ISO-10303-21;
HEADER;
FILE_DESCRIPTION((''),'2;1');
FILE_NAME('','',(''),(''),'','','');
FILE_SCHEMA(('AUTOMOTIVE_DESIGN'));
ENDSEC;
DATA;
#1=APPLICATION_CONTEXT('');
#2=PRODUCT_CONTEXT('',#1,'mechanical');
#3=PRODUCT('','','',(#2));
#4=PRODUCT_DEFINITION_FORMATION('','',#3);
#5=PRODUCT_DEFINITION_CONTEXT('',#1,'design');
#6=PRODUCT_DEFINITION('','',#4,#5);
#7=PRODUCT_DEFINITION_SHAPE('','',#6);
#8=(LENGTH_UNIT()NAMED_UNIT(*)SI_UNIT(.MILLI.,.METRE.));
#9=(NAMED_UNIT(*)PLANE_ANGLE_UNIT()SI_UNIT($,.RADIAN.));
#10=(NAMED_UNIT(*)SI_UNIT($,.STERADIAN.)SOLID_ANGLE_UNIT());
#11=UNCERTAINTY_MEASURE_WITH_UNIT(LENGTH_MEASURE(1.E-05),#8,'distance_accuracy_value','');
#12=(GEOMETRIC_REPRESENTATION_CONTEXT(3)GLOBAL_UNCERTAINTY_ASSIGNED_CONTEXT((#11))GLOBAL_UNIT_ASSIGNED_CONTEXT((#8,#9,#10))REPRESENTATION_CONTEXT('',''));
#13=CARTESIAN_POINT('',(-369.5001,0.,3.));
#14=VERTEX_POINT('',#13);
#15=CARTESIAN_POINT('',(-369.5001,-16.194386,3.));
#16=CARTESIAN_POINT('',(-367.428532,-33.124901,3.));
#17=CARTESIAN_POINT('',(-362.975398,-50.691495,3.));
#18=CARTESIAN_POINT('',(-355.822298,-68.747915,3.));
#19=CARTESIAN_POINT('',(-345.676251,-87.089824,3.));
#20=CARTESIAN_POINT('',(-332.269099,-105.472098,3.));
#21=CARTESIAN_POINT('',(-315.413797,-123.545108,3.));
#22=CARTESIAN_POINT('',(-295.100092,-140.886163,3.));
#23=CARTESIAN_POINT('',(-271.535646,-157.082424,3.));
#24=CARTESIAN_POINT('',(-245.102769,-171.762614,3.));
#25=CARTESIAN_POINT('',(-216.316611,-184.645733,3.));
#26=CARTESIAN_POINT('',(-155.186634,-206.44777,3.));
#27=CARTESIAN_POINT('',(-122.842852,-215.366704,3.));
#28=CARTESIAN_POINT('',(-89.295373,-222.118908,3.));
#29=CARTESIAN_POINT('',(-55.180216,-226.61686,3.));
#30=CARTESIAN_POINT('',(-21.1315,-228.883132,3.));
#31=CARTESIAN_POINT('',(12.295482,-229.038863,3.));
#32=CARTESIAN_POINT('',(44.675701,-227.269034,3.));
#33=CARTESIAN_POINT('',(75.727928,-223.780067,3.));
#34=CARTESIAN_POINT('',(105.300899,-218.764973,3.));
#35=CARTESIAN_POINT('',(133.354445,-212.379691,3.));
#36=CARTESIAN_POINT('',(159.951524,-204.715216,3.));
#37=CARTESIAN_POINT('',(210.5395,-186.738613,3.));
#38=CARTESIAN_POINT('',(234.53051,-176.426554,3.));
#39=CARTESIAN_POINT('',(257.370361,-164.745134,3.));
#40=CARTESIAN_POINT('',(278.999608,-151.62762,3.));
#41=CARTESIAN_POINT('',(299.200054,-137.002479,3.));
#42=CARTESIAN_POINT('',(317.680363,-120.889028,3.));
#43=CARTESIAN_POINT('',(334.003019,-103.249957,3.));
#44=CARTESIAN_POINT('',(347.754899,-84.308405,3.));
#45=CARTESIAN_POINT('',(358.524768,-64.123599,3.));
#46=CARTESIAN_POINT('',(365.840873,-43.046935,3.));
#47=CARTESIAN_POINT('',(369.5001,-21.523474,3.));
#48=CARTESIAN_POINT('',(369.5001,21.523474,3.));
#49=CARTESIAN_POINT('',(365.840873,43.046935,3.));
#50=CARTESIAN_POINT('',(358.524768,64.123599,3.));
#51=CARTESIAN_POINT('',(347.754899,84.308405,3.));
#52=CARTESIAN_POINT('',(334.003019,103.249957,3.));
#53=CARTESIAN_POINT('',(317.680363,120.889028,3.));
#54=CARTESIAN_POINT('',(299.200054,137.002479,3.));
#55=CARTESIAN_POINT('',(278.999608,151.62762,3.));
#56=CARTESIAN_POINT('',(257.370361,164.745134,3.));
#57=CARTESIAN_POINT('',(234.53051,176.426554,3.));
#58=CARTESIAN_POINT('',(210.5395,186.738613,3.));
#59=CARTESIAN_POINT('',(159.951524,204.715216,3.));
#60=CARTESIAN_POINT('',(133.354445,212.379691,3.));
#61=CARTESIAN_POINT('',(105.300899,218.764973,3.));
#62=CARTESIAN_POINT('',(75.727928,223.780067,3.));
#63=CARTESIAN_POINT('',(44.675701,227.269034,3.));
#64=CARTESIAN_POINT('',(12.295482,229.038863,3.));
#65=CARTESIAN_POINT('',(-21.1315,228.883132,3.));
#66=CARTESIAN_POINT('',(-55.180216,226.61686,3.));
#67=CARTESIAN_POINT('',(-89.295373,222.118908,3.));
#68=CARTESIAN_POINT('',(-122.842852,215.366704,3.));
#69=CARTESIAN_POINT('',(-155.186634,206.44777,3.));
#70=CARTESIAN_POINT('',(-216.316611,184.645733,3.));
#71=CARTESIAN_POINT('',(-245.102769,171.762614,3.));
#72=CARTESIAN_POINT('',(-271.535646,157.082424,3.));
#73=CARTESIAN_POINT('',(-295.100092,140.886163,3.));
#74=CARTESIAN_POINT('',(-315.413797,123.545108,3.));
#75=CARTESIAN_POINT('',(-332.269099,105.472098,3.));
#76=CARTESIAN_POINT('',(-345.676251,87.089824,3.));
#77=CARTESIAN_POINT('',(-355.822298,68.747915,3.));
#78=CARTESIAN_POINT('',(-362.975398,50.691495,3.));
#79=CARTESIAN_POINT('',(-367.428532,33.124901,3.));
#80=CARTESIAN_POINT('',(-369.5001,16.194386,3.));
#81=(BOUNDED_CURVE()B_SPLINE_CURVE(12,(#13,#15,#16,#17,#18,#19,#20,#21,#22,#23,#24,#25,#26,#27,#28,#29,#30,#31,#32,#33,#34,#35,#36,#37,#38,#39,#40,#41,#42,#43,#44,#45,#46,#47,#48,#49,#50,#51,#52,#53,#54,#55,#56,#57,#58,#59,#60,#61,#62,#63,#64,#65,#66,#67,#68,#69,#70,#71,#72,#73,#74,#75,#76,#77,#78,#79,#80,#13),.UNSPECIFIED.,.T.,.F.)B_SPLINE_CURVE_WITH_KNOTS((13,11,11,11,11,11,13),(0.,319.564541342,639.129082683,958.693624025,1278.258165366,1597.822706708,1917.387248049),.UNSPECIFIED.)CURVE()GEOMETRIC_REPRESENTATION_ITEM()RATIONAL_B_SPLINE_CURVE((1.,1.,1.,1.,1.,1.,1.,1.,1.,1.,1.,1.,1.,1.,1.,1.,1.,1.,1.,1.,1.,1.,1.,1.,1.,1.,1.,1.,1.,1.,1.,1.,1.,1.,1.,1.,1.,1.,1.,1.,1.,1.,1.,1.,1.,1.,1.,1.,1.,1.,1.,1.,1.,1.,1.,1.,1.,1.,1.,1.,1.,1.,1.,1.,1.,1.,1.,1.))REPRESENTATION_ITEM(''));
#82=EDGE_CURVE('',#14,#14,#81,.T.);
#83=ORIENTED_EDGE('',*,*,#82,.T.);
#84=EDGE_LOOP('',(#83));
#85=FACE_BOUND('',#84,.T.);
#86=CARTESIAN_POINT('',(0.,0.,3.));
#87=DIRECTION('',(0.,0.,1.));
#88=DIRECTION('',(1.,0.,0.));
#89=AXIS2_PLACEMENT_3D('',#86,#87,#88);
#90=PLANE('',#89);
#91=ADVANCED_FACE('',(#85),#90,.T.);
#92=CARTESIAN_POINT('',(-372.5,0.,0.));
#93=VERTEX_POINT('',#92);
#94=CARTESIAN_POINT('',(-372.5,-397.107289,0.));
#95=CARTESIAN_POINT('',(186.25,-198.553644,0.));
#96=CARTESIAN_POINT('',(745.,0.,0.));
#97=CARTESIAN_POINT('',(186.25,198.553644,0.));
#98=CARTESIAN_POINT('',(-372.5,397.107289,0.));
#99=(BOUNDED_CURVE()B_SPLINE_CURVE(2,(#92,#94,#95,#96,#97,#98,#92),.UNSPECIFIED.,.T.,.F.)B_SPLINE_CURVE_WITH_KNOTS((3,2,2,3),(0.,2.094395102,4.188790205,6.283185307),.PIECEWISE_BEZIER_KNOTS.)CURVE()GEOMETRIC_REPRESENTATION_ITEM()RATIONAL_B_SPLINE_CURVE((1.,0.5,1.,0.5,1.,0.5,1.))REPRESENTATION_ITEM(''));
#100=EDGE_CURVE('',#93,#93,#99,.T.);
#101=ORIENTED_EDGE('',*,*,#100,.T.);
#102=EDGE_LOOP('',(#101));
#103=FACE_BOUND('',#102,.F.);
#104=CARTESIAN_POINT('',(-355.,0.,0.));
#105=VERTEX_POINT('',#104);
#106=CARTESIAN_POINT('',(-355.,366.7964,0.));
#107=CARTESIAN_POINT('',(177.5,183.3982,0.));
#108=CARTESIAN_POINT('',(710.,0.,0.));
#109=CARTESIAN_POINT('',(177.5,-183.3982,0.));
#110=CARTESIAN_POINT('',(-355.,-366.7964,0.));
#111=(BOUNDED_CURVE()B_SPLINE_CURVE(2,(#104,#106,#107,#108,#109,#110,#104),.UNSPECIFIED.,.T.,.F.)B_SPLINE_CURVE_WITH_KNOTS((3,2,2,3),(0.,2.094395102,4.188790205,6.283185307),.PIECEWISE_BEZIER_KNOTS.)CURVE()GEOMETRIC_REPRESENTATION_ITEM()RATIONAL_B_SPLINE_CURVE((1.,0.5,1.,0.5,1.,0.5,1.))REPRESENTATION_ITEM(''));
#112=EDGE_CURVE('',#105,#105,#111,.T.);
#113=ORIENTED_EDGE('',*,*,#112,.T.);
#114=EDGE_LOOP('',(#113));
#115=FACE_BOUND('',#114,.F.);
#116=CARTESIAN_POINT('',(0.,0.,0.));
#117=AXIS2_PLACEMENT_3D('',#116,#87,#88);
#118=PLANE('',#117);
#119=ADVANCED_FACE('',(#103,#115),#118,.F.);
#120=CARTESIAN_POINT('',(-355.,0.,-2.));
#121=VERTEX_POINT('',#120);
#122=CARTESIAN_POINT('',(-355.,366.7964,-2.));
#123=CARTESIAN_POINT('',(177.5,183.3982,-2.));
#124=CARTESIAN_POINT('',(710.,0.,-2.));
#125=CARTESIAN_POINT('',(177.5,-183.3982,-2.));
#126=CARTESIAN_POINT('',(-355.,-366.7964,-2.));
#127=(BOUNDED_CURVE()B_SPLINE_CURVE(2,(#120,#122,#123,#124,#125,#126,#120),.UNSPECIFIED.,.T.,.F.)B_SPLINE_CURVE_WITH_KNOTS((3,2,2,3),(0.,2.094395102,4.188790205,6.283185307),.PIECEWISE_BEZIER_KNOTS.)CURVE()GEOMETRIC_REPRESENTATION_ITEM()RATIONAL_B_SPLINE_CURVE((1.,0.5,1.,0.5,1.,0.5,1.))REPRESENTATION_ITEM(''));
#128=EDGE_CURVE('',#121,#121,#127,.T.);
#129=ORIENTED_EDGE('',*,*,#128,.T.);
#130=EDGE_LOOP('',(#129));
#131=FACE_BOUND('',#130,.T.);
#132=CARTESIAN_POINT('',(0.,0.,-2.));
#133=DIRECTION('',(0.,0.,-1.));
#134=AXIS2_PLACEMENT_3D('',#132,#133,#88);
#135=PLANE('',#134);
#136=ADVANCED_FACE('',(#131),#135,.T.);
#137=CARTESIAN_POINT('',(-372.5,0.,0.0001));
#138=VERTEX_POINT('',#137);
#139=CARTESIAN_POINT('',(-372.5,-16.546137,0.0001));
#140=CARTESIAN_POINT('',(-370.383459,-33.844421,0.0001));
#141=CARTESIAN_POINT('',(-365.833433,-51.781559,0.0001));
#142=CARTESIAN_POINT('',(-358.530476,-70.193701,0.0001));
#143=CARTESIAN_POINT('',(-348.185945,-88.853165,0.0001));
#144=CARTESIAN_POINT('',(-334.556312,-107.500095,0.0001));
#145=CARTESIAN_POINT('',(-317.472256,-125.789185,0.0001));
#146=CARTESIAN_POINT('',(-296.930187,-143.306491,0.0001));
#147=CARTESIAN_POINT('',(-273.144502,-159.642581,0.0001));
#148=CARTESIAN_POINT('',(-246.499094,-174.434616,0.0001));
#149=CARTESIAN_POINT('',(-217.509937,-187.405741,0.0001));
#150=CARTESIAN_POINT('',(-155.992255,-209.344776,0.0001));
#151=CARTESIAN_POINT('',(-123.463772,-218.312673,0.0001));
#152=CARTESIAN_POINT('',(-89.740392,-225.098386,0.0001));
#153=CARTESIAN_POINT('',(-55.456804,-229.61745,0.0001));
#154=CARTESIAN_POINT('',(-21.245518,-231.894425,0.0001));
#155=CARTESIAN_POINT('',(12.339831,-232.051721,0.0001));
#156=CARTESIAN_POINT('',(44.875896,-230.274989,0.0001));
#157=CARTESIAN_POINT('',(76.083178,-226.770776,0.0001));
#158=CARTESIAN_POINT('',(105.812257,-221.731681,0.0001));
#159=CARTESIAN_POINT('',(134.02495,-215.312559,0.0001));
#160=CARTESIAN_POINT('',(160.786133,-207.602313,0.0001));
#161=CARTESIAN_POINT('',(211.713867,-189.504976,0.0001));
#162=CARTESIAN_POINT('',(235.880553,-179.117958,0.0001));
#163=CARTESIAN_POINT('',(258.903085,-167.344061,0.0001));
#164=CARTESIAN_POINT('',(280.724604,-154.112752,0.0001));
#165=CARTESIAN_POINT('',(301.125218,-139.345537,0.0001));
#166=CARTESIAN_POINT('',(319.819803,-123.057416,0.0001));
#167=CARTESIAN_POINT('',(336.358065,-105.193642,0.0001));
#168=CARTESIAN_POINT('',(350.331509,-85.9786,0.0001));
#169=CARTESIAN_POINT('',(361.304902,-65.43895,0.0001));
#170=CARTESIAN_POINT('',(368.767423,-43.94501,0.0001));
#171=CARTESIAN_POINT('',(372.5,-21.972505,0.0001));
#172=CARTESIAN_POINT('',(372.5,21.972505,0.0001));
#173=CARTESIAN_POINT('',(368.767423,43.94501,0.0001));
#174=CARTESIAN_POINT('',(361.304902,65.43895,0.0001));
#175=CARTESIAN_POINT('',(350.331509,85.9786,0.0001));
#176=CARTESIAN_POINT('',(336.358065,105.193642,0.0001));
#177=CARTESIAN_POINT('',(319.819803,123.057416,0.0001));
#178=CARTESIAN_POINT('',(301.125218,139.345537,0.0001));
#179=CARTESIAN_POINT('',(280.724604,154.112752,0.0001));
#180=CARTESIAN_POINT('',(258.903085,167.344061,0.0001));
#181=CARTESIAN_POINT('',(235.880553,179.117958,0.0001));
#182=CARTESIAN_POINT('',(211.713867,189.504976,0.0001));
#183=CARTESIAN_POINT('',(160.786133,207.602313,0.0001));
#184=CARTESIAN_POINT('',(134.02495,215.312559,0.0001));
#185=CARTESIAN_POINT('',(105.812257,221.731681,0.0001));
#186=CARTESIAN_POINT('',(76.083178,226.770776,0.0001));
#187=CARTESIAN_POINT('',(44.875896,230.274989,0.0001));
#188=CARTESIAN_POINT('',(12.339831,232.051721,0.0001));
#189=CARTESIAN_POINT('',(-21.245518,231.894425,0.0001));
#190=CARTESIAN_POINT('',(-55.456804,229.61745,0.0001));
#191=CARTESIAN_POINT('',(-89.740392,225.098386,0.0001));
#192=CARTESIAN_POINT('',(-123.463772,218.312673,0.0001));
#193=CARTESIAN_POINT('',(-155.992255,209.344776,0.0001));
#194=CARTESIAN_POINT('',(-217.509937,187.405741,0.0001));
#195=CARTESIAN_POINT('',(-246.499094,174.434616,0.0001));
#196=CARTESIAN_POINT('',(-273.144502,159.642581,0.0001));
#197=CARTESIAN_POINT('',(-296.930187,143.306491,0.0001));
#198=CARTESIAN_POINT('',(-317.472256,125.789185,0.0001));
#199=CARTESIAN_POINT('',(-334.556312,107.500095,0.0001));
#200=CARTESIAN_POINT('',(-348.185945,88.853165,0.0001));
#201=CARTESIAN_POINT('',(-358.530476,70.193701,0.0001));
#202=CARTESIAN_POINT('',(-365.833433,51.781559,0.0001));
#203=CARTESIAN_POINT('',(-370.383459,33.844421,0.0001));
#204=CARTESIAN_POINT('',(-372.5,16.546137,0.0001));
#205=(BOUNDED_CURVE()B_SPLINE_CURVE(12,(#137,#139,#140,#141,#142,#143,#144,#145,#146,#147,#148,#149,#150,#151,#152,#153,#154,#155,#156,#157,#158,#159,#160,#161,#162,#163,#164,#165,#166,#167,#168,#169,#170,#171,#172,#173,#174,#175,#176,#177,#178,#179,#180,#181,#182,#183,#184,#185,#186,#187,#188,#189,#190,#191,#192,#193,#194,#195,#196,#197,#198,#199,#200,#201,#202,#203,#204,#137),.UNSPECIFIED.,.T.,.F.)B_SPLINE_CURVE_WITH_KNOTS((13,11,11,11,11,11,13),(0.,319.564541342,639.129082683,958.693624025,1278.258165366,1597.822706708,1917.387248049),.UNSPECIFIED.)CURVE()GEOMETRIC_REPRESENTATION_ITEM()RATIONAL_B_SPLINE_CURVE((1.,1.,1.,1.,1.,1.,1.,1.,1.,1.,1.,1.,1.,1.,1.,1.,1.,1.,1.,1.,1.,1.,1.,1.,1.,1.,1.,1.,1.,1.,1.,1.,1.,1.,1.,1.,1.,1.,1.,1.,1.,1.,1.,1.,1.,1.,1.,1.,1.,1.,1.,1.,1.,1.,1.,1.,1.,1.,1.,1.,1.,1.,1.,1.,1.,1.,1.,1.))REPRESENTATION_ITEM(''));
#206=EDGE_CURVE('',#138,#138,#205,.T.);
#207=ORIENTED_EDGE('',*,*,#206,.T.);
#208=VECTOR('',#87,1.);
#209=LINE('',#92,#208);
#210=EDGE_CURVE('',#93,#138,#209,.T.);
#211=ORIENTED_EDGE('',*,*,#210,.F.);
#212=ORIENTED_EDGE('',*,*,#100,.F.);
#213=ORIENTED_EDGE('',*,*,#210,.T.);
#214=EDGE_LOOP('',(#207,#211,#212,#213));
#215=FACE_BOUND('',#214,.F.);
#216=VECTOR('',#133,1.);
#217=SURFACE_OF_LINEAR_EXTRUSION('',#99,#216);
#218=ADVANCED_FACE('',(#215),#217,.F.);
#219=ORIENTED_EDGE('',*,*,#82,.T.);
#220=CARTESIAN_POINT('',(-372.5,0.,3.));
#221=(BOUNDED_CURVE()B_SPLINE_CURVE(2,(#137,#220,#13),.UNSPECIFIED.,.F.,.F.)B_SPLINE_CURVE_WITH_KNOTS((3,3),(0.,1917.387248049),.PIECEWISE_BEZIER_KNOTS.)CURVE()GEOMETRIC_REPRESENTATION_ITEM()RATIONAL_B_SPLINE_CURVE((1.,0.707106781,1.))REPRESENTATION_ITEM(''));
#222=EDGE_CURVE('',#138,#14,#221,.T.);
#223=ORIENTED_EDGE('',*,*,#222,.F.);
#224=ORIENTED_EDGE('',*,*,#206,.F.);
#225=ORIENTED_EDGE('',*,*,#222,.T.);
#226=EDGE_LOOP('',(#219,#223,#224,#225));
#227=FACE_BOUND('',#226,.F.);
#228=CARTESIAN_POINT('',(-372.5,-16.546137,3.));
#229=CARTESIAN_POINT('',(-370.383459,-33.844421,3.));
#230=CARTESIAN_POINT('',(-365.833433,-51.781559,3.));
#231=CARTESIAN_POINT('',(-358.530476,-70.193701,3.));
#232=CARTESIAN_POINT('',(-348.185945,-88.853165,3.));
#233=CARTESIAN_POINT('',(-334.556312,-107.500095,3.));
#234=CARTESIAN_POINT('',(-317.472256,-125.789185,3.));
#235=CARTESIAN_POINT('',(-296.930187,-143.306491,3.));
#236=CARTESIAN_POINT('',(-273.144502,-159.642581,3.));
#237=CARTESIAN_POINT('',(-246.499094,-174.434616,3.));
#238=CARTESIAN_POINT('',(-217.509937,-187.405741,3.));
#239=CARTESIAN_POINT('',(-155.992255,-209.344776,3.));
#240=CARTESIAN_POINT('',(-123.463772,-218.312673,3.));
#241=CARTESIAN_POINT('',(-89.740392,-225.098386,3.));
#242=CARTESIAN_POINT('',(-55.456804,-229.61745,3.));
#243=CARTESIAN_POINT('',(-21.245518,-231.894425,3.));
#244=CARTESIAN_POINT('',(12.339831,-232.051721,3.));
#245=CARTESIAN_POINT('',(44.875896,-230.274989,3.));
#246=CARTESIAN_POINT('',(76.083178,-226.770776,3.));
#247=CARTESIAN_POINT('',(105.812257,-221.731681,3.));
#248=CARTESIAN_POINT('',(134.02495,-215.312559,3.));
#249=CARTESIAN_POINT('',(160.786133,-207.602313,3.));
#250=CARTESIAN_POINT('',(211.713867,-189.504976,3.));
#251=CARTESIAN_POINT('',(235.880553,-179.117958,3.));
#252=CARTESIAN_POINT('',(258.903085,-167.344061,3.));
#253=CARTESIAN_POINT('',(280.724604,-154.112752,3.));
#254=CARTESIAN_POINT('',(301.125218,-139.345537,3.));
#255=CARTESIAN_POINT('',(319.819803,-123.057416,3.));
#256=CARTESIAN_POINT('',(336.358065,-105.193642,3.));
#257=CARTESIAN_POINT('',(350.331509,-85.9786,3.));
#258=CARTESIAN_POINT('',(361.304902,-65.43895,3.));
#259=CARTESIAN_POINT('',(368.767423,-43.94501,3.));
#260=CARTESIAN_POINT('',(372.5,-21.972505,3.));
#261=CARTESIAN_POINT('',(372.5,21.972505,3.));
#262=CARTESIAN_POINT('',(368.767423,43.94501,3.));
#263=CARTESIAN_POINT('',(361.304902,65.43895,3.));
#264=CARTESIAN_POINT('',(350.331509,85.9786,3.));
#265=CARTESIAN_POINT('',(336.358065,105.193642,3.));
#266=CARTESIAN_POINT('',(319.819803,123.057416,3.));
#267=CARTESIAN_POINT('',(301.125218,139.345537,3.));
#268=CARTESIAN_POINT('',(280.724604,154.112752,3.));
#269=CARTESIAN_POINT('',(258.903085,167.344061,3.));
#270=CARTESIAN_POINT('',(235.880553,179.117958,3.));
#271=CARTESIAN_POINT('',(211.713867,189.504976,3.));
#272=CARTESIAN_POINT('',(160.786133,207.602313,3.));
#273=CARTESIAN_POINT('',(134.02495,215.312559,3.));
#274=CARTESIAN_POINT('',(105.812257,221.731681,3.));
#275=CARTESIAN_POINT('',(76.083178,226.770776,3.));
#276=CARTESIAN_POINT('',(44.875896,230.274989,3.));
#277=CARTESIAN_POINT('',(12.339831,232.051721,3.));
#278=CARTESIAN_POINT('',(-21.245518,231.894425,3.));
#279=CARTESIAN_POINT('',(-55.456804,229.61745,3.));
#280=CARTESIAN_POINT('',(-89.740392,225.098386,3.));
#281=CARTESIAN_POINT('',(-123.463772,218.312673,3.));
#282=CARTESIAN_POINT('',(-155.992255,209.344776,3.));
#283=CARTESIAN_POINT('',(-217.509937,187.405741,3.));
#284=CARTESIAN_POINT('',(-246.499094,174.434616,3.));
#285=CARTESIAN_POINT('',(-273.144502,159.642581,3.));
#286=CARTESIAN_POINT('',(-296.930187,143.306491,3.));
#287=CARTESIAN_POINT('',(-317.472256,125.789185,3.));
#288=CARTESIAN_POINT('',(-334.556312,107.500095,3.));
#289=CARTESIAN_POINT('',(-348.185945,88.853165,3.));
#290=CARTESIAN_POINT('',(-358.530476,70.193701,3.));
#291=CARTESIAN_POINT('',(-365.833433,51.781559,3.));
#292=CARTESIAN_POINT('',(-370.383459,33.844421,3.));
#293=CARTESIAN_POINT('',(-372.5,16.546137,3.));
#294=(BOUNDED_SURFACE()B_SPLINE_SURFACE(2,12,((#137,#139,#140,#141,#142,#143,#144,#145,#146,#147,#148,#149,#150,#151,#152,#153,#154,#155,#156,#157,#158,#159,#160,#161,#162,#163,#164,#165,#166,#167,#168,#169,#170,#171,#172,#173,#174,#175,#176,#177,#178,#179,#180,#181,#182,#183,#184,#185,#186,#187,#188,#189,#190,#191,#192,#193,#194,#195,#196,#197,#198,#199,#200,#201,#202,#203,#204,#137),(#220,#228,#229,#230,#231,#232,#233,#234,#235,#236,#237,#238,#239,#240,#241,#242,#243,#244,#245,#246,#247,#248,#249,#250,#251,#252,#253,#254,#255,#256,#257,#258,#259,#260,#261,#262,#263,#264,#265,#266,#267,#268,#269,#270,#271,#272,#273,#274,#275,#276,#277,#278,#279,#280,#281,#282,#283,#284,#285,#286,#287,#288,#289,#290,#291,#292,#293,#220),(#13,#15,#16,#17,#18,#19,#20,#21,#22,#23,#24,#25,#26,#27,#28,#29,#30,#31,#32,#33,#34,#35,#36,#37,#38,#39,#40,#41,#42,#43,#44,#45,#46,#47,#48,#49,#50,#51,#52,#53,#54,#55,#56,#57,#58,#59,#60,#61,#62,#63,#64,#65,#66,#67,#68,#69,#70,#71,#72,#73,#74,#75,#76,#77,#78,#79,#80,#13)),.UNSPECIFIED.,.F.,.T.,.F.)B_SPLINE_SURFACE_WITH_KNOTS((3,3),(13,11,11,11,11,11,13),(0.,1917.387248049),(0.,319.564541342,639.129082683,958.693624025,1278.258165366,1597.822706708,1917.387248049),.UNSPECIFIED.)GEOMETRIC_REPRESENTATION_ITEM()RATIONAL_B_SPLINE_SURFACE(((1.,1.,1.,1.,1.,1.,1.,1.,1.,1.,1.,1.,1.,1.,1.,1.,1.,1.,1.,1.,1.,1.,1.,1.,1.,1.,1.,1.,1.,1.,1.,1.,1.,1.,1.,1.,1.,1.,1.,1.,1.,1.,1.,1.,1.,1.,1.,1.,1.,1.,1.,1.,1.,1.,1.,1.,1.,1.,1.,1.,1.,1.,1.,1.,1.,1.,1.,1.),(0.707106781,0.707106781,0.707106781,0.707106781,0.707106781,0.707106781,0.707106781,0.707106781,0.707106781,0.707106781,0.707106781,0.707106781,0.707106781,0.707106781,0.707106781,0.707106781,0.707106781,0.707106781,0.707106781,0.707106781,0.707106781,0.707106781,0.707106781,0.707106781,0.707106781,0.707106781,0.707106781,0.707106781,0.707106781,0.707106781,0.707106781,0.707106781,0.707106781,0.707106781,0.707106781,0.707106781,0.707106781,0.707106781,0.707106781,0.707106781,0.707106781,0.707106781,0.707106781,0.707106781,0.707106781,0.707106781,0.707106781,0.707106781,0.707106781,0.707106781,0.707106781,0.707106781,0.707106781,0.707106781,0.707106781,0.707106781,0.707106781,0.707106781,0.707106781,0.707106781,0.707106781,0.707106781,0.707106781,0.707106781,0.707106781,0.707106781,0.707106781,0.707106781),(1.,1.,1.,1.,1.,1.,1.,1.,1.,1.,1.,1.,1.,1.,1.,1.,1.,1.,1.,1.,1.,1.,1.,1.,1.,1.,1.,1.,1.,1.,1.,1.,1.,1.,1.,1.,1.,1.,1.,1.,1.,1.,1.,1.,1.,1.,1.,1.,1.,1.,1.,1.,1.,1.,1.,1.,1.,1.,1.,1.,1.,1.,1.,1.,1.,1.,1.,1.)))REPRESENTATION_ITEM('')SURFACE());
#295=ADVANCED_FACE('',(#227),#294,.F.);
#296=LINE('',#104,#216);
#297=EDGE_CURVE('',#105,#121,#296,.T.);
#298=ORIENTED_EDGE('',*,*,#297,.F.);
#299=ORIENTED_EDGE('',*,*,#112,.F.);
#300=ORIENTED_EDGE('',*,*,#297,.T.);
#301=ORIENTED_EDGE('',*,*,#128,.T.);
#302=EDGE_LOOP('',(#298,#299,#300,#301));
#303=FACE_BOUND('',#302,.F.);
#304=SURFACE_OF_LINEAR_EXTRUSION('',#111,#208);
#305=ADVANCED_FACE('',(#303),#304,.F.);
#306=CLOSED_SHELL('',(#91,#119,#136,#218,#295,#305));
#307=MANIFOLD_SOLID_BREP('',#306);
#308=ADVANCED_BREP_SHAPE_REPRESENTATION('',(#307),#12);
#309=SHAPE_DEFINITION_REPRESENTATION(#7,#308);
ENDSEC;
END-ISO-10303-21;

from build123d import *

# Parameters (mm, degrees)
F1_DEPTH = 3
F2_R     = 2.9999
F4_DEPTH = 2


# Not quite as in the source:
# - a fillet or chamfer is up to 0.001 mm smaller than in the source, because OpenCascade refuses the exact size


with BuildPart() as f1:
    # F0 (on Top) → F1 (new body)
    with BuildSketch(Plane.XY):
        with BuildLine():
            add(Edge.make_bspline(
                [(-372.5, 0), (-372.5, -397.1072886513), (186.25, -198.5536443257), (745, 0), (186.25, 198.5536443257), (-372.5, 397.1072886513), (-372.5, 0)],
                knots=[0, 0, 0, 2.0943951024, 2.0943951024, 4.1887902048, 4.1887902048, 6.2831853072, 6.2831853072, 6.2831853072], degree=2, weights=[1, 0.5, 1, 0.5, 1, 0.5, 1]))
        make_face()
    extrude(amount=F1_DEPTH)

    # F2 (radius 3 in the source; OpenCascade refuses exactly that, so slightly less here)
    f2_edges = [f1.edges().sort_by_distance(p)[0] for p in [
        (372.5, -3e-06, 3),
    ]]
    fillet(f2_edges, radius=F2_R)

    # F3 (on face) → F4 (join)
    with BuildSketch(Plane(origin=(0, 0, 0), x_dir=(1, 0, 0), z_dir=(0, 0, -1))):
        with BuildLine():
            add(Edge.make_bspline(
                [(-355, 0), (-355, -366.7963995189), (177.5, -183.3981997594), (710, 0), (177.5, 183.3981997594), (-355, 366.7963995189), (-355, 0)],
                knots=[0, 0, 0, 2.0943951024, 2.0943951024, 4.1887902048, 4.1887902048, 6.2831853072, 6.2831853072, 6.2831853072], degree=2, weights=[1, 0.5, 1, 0.5, 1, 0.5, 1]))
        make_face()
    extrude(amount=F4_DEPTH)


solid = f1.part
